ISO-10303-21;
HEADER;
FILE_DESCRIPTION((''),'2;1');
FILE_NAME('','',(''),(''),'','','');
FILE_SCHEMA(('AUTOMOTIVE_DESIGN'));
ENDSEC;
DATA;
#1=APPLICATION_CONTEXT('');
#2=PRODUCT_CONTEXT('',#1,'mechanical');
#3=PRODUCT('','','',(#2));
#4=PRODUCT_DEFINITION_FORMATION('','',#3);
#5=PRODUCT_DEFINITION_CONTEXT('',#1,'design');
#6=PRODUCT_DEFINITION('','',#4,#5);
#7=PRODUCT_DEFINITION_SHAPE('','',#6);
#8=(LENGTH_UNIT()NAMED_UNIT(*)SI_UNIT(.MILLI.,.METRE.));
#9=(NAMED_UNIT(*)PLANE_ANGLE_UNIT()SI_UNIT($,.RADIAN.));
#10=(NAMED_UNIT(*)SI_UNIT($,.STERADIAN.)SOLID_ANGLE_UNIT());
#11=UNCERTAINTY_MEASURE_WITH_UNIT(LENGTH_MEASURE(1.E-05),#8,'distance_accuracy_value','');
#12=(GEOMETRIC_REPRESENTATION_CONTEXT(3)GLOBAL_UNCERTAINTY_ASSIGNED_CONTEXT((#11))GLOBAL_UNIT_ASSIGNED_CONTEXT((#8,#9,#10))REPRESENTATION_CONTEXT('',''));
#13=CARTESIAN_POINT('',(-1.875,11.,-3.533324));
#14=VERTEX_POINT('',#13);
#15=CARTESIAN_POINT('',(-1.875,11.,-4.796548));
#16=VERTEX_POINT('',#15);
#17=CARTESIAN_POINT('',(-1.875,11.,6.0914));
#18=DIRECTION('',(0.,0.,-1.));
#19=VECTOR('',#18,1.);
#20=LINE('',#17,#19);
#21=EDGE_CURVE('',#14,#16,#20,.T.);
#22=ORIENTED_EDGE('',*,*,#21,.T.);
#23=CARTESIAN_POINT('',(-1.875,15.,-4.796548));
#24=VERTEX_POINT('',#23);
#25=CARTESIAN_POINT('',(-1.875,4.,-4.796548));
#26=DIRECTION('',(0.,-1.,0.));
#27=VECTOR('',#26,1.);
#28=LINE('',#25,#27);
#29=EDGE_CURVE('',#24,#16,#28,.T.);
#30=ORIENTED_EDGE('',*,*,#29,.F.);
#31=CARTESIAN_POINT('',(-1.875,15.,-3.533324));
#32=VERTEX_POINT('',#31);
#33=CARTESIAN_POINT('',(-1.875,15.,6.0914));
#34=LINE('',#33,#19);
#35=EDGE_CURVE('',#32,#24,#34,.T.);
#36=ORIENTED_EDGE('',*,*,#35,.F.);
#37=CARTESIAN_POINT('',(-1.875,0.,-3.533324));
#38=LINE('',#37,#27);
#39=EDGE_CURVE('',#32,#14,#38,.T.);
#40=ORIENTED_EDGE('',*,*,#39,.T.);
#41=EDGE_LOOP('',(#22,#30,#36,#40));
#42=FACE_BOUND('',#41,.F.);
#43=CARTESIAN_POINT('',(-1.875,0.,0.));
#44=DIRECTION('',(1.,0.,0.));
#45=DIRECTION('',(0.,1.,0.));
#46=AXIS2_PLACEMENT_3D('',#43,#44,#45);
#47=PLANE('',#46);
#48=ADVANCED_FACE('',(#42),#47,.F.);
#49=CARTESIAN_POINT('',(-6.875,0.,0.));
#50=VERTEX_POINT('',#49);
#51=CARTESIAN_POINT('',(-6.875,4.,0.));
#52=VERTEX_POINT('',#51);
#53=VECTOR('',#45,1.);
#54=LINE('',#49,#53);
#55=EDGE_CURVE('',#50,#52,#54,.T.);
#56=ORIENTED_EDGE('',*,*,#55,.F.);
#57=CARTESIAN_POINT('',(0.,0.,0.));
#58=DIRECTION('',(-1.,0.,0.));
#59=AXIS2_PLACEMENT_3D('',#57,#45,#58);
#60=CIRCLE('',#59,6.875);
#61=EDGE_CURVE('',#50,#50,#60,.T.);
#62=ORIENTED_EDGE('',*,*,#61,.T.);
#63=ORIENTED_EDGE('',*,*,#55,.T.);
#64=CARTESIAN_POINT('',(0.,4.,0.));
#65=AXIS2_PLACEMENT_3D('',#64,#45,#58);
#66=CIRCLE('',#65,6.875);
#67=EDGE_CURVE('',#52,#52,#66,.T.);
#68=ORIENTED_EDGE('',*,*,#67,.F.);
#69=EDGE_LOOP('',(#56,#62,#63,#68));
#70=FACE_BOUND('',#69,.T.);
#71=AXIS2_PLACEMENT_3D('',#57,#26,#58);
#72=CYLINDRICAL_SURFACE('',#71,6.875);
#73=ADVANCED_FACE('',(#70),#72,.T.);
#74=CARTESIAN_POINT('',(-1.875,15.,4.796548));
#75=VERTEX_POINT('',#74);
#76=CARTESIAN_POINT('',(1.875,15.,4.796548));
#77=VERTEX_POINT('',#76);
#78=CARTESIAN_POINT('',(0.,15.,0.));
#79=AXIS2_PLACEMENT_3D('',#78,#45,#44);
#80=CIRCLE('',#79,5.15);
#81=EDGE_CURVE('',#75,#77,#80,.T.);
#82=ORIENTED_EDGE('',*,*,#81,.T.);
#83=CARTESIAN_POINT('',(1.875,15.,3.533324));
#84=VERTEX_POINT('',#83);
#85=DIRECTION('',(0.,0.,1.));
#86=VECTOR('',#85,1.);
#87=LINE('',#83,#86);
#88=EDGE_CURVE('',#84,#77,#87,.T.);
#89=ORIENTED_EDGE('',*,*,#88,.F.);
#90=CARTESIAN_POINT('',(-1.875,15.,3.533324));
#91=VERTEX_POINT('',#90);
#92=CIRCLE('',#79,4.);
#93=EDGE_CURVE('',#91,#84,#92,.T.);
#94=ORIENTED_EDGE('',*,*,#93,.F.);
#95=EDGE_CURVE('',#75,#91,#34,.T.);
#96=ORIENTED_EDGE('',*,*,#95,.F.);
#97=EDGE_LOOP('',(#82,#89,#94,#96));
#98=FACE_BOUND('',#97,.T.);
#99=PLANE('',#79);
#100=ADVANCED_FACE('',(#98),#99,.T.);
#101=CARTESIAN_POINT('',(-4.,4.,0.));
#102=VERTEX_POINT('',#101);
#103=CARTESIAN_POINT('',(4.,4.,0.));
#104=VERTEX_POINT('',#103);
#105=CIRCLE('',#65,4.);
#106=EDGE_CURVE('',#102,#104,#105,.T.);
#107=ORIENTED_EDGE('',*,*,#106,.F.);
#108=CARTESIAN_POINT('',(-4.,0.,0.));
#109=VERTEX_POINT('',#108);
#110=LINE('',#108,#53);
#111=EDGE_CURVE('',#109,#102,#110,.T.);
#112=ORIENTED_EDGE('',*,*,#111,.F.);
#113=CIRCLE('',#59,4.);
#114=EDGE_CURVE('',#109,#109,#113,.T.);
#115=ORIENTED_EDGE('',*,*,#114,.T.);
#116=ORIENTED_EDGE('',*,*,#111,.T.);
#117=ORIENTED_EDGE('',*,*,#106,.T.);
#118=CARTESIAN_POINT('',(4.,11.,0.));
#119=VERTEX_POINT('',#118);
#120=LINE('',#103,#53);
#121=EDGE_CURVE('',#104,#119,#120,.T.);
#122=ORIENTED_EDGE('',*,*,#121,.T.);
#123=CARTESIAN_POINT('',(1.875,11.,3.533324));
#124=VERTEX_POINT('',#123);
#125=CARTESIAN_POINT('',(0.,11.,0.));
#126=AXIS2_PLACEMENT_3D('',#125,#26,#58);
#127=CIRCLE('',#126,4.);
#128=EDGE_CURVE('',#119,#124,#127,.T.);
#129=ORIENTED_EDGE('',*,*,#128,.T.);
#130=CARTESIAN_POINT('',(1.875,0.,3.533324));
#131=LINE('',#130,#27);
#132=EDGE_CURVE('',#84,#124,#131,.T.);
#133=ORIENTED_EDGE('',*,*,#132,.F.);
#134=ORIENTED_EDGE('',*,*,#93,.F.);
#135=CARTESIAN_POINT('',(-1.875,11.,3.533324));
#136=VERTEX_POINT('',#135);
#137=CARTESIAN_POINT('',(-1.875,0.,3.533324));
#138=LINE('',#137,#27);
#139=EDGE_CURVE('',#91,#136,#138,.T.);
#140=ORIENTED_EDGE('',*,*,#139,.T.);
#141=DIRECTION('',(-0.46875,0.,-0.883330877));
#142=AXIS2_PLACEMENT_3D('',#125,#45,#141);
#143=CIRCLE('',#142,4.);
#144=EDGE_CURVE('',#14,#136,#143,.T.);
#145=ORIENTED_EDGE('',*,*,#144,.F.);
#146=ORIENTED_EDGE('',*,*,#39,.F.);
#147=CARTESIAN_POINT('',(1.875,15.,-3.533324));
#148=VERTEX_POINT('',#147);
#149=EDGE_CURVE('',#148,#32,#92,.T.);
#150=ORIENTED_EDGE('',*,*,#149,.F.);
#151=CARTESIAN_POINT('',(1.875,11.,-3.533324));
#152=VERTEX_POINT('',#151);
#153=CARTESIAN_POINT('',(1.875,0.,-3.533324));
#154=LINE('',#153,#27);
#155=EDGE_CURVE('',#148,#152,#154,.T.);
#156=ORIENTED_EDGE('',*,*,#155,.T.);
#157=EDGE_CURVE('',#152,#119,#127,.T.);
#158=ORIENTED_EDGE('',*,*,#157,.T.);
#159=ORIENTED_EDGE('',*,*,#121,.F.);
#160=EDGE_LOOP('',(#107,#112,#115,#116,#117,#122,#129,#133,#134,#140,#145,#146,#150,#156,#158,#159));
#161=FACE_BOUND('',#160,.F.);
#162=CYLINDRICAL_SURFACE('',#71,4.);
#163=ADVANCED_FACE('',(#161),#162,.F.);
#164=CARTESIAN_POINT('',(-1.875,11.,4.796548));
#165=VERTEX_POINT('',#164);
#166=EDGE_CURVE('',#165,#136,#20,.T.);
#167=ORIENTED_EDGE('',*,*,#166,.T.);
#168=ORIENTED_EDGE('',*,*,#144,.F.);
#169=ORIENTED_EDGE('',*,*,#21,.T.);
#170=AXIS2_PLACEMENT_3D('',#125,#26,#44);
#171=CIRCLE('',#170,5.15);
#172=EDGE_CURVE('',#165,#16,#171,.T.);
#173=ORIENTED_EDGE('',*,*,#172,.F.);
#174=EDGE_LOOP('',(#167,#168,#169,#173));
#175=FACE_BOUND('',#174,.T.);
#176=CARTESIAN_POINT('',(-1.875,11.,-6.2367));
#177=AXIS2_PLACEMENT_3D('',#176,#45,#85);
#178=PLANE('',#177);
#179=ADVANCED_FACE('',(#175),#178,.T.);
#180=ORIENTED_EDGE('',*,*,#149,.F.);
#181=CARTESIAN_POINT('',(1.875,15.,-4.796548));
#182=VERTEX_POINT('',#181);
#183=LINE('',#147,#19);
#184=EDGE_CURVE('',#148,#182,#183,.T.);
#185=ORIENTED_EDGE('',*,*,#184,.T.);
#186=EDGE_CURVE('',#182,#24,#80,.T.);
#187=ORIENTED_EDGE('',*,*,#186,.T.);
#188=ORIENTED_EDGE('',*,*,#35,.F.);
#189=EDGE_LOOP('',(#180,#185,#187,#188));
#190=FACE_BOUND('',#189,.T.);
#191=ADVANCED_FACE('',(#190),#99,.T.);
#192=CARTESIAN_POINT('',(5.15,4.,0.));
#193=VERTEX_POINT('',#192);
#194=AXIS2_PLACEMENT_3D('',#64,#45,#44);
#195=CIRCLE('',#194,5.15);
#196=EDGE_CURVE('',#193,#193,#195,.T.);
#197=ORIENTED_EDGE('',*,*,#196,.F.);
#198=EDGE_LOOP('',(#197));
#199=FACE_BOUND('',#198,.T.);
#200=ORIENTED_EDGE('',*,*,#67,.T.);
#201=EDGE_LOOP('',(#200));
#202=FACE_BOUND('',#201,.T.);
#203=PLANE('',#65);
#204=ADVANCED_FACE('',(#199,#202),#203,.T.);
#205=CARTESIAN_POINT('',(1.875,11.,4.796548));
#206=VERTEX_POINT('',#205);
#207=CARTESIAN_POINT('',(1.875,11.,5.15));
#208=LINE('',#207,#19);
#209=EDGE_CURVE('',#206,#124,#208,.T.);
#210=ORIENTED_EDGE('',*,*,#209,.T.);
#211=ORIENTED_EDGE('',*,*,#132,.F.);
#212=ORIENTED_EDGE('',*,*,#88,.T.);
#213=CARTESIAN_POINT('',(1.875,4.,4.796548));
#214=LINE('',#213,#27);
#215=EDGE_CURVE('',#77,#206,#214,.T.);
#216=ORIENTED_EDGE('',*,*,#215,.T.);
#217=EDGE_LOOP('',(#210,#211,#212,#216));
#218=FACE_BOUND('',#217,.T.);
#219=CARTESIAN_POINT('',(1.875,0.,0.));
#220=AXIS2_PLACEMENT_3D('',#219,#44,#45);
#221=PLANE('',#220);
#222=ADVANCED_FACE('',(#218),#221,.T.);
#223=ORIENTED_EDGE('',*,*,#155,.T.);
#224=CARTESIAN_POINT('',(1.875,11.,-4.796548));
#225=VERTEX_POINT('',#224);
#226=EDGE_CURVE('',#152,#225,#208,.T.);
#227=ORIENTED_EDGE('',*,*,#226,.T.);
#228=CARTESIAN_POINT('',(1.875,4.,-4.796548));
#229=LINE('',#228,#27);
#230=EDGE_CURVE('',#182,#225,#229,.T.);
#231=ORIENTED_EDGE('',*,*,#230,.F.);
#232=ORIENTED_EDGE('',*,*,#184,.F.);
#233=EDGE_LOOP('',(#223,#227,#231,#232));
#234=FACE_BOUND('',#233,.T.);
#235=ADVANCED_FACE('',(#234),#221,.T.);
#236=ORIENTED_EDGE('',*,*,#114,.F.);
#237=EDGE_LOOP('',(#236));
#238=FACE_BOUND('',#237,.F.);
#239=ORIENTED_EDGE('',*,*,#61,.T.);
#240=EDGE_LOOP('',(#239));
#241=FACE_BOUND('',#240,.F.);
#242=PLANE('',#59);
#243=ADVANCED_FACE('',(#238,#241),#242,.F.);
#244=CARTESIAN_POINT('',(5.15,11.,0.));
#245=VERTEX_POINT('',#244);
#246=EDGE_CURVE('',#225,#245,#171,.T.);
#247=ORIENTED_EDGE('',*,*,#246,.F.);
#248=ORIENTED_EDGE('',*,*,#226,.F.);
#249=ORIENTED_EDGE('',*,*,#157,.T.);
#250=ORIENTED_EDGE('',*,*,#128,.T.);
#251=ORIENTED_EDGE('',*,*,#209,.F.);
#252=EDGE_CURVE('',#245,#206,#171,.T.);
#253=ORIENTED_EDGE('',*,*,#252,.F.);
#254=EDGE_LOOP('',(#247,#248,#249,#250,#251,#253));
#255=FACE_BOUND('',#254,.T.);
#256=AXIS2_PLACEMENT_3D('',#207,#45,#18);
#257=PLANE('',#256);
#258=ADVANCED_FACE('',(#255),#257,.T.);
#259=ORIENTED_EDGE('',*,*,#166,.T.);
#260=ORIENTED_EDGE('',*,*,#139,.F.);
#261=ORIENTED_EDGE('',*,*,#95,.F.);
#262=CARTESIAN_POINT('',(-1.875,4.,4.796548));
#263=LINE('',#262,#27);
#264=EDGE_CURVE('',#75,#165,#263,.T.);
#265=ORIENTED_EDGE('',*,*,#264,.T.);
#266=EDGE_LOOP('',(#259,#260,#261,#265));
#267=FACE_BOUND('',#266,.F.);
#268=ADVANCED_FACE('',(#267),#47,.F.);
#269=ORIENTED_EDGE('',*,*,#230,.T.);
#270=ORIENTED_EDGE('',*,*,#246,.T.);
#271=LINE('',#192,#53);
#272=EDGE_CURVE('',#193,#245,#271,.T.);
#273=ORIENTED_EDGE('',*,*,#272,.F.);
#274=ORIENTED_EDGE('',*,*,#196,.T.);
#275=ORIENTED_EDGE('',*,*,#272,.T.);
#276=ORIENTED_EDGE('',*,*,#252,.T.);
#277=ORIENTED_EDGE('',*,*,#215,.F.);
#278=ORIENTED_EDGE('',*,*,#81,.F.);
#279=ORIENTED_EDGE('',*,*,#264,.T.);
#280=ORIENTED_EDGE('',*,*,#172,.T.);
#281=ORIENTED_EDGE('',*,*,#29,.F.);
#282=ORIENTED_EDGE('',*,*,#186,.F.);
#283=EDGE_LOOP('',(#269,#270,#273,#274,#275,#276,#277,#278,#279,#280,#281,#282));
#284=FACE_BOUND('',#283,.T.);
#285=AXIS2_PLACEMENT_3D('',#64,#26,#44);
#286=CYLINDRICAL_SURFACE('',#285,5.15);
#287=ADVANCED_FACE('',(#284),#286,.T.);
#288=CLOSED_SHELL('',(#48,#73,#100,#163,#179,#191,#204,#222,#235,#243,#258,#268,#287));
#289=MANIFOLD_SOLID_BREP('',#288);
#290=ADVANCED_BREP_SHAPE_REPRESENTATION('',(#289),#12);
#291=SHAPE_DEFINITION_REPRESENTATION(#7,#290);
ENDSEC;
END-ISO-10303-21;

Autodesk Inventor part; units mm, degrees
ref_plane "XZ Plane" through (0, 0, 0) normal (0, 1, 0) x (-1, 0, 0)
sketch "Szkic1" plane through (0, 0, 0) normal (0, 1, 0) x (-1, 0, 0)
  circle A0 centre (0, 0) radius 6.875
  circle A1 centre (0, 0) radius 4
  dimension "d0" = 13.75
  dimension "d1" = 8
extrude "Wyciągnięcie proste1" add sketch "Szkic1" along normal blind 4
sketch "Szkic2" plane through (0, 4, 0) normal (0, 1, 0) x (1, 0, 0)
  circle A0 centre (0, 0) radius 5.15
  circle A1 centre (0, 0) radius 4 projected
  dimension "d4" = 10.3
extrude "Wyciągnięcie proste2" add sketch "Szkic2" along normal blind 11
ref_plane "Płaszczyzna konstrukcyjna1" through (1.875, 0, 0) normal (1, 0, 0) x (0, 1, 0)
sketch "Szkic3" plane through (1.875, 0, 0) normal (1, 0, 0) x (0, 1, 0)
  line L0 (15, 4) -> (15, -4) projected
  line L1 (0, -4) -> (0, 4) projected
  line L2 (4, 5.15) -> (15, 5.15) projected
  line L3 (4, -5.15) -> (15, -5.15) projected
  line L4 (15, -5.15) -> (15, 5.15) projected
  line L5 (15, 5.15) -> (11, 5.15)
  line L6 (11, 5.15) -> (11, -5.15)
  line L7 (11, -5.15) -> (15, -5.15)
  line L8 (15, -5.15) -> (15, 5.15)
  point P0 (0, 0)
  dimension "d8" = 4
extrude "Wyciągnięcie proste3" cut sketch "Szkic3" along normal through all
ref_plane "Płaszczyzna konstrukcyjna2" through (-1.875, 0, 0) normal (1, 0, 0) x (0, 1, 0)
sketch "Szkic4" plane through (-1.875, 0, 0) normal (1, 0, 0) x (0, 1, 0)
  line L0 (4, 5.15) -> (4, -5.15) projected
  line L1 (15, -4.7965) -> (11, -4.7965) projected
  line L2 (11, -4.7965) -> (11, 4.7965) projected
  line L3 (11, 4.7965) -> (15, 4.7965) projected
  line L4 (15, -4.7965) -> (15, 4.7965) projected
  line L5 (4, 5.15) -> (15, 5.15) projected
  line L6 (15, -6.2367) -> (11, -6.2367)
  line L7 (11, -6.2367) -> (11, 6.0914)
  line L8 (11, 6.0914) -> (15, 6.0914)
  line L9 (15, 6.0914) -> (15, -6.2367)
  point P0 (0, 0)
extrude "Wyciągnięcie proste4" cut sketch "Szkic4" against normal through all
properties part number "TR8_AntiBacklashNutSecondary"
